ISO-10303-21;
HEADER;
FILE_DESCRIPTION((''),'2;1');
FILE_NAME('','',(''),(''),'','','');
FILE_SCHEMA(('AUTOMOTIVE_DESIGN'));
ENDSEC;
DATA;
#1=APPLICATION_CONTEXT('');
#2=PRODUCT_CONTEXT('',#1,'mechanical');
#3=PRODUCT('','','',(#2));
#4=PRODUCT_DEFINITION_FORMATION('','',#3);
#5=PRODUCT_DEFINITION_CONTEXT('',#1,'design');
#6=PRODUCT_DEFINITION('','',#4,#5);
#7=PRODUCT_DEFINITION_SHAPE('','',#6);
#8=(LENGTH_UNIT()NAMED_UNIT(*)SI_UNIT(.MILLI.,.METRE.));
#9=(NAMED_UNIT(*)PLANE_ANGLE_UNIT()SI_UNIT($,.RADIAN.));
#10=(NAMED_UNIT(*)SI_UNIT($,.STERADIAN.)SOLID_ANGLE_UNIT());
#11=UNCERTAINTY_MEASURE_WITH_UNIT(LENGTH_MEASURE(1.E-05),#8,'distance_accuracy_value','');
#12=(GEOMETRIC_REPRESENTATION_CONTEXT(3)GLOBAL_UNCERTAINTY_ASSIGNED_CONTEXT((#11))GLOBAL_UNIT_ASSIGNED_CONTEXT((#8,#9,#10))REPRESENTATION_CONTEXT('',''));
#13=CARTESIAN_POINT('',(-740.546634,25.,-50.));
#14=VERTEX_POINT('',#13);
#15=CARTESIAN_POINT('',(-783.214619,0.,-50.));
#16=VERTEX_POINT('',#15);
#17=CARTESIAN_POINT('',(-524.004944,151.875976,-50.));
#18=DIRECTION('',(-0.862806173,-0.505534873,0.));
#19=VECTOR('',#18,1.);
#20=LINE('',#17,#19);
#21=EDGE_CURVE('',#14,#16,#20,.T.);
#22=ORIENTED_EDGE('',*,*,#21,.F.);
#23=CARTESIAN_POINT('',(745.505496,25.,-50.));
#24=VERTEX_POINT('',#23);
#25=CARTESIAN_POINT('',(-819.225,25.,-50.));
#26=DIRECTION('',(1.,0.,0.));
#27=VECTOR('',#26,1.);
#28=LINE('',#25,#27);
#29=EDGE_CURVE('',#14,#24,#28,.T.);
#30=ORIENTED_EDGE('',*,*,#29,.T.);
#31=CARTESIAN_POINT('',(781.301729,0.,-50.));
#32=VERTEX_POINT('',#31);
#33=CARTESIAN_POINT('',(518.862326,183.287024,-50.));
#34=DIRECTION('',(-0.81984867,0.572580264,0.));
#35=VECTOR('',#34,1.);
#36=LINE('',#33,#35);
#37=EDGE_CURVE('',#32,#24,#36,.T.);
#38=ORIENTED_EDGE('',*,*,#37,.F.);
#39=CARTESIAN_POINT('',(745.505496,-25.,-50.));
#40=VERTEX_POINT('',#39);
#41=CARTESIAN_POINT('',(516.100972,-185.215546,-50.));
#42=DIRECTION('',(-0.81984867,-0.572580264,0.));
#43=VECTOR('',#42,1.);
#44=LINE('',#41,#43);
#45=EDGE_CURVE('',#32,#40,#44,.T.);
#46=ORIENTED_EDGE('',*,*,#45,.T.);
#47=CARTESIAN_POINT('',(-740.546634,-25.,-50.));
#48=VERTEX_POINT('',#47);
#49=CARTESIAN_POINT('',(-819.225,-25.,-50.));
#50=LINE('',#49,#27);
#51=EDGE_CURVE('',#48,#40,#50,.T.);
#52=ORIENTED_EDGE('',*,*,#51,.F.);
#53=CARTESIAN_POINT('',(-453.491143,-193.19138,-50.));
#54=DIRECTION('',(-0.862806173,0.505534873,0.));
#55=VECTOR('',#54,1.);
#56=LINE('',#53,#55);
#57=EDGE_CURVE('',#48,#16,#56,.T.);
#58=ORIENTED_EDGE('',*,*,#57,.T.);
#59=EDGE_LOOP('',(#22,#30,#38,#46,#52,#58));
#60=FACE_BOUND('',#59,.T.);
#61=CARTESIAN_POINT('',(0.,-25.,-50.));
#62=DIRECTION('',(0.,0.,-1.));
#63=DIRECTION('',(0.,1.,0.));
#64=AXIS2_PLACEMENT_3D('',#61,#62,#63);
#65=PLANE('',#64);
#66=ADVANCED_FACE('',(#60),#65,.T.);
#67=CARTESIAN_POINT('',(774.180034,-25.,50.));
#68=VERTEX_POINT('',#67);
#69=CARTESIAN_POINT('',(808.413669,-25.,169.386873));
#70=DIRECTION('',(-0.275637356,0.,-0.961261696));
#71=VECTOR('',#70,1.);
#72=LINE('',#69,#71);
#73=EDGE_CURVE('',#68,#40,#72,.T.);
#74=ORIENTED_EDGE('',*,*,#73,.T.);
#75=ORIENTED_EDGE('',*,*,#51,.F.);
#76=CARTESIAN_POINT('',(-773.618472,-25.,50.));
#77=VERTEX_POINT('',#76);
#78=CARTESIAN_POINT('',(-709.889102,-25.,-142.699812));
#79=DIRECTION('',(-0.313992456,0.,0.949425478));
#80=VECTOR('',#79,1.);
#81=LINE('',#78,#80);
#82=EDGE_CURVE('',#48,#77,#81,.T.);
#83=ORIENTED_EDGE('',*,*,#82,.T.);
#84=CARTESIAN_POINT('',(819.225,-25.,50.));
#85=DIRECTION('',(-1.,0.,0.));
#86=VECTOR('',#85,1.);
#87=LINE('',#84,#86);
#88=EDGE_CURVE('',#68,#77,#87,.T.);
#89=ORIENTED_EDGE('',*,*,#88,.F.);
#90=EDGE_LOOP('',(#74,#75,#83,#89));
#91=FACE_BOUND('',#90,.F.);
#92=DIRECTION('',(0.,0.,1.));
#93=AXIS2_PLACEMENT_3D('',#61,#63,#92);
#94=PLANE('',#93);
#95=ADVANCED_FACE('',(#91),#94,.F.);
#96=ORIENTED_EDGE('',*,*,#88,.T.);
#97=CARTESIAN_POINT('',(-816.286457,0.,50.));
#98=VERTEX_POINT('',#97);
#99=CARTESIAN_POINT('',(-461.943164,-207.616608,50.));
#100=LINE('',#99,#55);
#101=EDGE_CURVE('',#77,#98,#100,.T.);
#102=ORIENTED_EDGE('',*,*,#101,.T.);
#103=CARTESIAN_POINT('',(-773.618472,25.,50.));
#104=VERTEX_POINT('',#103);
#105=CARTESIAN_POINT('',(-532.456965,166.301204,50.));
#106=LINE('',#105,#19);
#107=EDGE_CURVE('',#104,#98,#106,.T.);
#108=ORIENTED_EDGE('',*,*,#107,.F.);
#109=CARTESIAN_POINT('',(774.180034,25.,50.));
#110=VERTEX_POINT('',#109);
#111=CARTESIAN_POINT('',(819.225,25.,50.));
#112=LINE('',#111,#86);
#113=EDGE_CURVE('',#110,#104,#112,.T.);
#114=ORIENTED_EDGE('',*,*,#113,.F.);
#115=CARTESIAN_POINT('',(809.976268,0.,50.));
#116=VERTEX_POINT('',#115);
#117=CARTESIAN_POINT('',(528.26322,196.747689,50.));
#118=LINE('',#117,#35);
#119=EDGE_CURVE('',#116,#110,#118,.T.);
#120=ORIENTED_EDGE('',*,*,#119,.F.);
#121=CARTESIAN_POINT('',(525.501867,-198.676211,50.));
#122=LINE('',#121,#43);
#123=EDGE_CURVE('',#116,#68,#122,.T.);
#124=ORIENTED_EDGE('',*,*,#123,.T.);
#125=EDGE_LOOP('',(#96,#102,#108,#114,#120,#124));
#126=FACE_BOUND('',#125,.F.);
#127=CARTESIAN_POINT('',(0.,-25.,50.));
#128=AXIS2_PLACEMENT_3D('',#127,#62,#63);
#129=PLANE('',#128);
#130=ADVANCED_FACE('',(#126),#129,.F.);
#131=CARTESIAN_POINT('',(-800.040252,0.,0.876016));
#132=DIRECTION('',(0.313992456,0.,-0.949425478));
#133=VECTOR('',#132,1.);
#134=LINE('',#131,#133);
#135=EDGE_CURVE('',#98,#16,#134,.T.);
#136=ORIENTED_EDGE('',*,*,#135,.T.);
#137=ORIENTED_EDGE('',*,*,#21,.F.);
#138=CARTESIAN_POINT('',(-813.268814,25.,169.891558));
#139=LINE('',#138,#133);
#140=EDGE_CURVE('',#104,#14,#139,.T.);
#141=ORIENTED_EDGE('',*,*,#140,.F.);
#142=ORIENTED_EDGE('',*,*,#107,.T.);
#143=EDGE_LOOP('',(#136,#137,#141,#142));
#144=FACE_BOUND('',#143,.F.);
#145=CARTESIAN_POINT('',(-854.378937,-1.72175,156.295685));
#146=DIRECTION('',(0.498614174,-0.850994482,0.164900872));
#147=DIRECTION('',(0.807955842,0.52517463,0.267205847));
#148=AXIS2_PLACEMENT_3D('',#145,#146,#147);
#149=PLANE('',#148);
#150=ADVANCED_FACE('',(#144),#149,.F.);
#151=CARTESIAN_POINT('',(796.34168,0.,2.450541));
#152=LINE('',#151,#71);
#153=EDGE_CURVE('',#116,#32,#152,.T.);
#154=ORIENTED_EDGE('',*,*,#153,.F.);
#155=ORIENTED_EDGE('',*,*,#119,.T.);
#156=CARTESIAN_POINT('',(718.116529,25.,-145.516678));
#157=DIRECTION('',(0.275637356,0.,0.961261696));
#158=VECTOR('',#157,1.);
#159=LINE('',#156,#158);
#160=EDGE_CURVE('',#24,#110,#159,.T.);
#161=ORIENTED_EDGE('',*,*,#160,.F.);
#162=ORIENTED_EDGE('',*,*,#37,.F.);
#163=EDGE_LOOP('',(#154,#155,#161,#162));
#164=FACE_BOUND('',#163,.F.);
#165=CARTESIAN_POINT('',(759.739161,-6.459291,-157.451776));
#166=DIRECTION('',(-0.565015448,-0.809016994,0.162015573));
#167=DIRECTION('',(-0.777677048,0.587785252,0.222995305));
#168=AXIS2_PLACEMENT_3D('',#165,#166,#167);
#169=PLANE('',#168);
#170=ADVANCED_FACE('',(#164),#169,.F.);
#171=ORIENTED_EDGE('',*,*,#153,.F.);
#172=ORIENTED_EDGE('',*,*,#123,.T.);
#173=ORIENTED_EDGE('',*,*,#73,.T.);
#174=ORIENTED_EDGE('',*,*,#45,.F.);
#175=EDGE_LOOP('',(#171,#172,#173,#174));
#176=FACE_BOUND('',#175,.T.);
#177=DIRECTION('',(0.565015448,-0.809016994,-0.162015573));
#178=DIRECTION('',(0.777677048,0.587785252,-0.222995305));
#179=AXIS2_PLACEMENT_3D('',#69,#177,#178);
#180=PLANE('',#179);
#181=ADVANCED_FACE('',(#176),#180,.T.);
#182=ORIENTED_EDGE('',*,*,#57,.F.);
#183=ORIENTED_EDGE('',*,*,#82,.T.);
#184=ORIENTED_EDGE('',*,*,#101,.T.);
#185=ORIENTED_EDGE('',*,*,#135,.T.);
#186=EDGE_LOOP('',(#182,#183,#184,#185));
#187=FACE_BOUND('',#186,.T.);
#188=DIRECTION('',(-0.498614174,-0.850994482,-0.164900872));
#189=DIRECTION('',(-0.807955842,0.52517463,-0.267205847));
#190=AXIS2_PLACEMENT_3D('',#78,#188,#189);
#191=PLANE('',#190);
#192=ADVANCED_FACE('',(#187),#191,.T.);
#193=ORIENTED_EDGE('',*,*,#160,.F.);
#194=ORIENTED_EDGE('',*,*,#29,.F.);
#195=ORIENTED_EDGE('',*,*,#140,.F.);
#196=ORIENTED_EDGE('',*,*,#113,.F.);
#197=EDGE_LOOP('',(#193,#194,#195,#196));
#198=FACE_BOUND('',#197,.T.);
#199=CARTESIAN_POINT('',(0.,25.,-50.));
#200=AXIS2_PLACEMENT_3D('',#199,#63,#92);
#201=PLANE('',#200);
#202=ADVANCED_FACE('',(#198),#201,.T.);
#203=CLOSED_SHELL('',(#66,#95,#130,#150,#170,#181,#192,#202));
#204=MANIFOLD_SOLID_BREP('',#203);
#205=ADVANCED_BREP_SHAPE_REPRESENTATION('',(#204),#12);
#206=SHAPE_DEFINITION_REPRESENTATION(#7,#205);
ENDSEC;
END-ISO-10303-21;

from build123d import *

# Parameters (mm, degrees)
F0_W        = 50
F0_H        = 100
F1_DEPTH    = 819.225
F3_DEPTH    = 50.001
F4_T1_DEPTH = 327.5939866368
F4_T3_DEPTH = 327.5939866368
F5_T1_DEPTH = 329.2426603123
F5_T3_DEPTH = 329.2426603123


# Not quite as in the source:
# - a fillet or chamfer that OpenCascade refuses, or shapes differently, is made with other operations: its cross-section is extruded or revolved along the edge and cut away or added


with BuildPart() as f1:
    # F0 (on Right) → F1 (new body, symmetric)
    with BuildSketch(Plane.YZ):
        Rectangle(F0_W, F0_H)
    extrude(amount=F1_DEPTH, both=True)

    # F2 (on face) → F3 (cut, through all)
    with BuildSketch(Plane.XZ.offset(25)):
        Polygon((819.225, -50), (819.225, 50), (790.5504614241, -50), align=None)
        Polygon((-786.1531619925, -50), (-819.225, 50), (-819.225, -50), align=None)
    extrude(amount=-F3_DEPTH, mode=Mode.SUBTRACT)

    # F4: chamfer of 43.3 x 31.4592914626 on 2 edges, made by hand

    # F4_s2 → F4_t1 (cut)
    with BuildSketch(Plane(origin=(106.3006816601, 0, 370.7145326115), x_dir=(0, 1, 0), z_dir=(-0.2756373558, 0, -0.9612616959))):
        Polygon((-25, 730.4077450642), (6.4592914626, 773.7077450642), (-25, 773.7077450642), align=None)
    extrude(amount=F4_T1_DEPTH, mode=Mode.SUBTRACT)

    # F4_s4 → F4_t3 (cut)
    with BuildSketch(Plane(origin=(16.003541402, 0, 55.8109814378), x_dir=(0, 1, 0), z_dir=(0.2756373558, 0, 0.9612616959))):
        Polygon((-6.4592914626, -773.7077450642), (25, -730.4077450642), (25, -773.7077450642), align=None)
    extrude(amount=F4_T3_DEPTH, mode=Mode.SUBTRACT)

    # F5: chamfer of 43.3 x 26.721749628 on 2 edges, made by hand

    # F5_s2 → F5_t1 (cut)
    with BuildSketch(Plane(origin=(-130.827985574, 0, 395.5872834902), x_dir=(0, 1, 0), z_dir=(0.313992456, 0, -0.9494254776))):
        Polygon((-1.721749628, -762.0934641228), (25, -718.7934641228), (25, -762.0934641228), align=None)
    extrude(amount=F5_T1_DEPTH, mode=Mode.SUBTRACT)

    # F5_s4 → F5_t3 (cut)
    with BuildSketch(Plane(origin=(-27.4482740533, 0, 82.9959134631), x_dir=(0, 1, 0), z_dir=(-0.313992456, 0, 0.9494254776))):
        Polygon((-25, 718.7934641228), (1.721749628, 762.0934641228), (-25, 762.0934641228), align=None)
    extrude(amount=F5_T3_DEPTH, mode=Mode.SUBTRACT)


solid = f1.part
